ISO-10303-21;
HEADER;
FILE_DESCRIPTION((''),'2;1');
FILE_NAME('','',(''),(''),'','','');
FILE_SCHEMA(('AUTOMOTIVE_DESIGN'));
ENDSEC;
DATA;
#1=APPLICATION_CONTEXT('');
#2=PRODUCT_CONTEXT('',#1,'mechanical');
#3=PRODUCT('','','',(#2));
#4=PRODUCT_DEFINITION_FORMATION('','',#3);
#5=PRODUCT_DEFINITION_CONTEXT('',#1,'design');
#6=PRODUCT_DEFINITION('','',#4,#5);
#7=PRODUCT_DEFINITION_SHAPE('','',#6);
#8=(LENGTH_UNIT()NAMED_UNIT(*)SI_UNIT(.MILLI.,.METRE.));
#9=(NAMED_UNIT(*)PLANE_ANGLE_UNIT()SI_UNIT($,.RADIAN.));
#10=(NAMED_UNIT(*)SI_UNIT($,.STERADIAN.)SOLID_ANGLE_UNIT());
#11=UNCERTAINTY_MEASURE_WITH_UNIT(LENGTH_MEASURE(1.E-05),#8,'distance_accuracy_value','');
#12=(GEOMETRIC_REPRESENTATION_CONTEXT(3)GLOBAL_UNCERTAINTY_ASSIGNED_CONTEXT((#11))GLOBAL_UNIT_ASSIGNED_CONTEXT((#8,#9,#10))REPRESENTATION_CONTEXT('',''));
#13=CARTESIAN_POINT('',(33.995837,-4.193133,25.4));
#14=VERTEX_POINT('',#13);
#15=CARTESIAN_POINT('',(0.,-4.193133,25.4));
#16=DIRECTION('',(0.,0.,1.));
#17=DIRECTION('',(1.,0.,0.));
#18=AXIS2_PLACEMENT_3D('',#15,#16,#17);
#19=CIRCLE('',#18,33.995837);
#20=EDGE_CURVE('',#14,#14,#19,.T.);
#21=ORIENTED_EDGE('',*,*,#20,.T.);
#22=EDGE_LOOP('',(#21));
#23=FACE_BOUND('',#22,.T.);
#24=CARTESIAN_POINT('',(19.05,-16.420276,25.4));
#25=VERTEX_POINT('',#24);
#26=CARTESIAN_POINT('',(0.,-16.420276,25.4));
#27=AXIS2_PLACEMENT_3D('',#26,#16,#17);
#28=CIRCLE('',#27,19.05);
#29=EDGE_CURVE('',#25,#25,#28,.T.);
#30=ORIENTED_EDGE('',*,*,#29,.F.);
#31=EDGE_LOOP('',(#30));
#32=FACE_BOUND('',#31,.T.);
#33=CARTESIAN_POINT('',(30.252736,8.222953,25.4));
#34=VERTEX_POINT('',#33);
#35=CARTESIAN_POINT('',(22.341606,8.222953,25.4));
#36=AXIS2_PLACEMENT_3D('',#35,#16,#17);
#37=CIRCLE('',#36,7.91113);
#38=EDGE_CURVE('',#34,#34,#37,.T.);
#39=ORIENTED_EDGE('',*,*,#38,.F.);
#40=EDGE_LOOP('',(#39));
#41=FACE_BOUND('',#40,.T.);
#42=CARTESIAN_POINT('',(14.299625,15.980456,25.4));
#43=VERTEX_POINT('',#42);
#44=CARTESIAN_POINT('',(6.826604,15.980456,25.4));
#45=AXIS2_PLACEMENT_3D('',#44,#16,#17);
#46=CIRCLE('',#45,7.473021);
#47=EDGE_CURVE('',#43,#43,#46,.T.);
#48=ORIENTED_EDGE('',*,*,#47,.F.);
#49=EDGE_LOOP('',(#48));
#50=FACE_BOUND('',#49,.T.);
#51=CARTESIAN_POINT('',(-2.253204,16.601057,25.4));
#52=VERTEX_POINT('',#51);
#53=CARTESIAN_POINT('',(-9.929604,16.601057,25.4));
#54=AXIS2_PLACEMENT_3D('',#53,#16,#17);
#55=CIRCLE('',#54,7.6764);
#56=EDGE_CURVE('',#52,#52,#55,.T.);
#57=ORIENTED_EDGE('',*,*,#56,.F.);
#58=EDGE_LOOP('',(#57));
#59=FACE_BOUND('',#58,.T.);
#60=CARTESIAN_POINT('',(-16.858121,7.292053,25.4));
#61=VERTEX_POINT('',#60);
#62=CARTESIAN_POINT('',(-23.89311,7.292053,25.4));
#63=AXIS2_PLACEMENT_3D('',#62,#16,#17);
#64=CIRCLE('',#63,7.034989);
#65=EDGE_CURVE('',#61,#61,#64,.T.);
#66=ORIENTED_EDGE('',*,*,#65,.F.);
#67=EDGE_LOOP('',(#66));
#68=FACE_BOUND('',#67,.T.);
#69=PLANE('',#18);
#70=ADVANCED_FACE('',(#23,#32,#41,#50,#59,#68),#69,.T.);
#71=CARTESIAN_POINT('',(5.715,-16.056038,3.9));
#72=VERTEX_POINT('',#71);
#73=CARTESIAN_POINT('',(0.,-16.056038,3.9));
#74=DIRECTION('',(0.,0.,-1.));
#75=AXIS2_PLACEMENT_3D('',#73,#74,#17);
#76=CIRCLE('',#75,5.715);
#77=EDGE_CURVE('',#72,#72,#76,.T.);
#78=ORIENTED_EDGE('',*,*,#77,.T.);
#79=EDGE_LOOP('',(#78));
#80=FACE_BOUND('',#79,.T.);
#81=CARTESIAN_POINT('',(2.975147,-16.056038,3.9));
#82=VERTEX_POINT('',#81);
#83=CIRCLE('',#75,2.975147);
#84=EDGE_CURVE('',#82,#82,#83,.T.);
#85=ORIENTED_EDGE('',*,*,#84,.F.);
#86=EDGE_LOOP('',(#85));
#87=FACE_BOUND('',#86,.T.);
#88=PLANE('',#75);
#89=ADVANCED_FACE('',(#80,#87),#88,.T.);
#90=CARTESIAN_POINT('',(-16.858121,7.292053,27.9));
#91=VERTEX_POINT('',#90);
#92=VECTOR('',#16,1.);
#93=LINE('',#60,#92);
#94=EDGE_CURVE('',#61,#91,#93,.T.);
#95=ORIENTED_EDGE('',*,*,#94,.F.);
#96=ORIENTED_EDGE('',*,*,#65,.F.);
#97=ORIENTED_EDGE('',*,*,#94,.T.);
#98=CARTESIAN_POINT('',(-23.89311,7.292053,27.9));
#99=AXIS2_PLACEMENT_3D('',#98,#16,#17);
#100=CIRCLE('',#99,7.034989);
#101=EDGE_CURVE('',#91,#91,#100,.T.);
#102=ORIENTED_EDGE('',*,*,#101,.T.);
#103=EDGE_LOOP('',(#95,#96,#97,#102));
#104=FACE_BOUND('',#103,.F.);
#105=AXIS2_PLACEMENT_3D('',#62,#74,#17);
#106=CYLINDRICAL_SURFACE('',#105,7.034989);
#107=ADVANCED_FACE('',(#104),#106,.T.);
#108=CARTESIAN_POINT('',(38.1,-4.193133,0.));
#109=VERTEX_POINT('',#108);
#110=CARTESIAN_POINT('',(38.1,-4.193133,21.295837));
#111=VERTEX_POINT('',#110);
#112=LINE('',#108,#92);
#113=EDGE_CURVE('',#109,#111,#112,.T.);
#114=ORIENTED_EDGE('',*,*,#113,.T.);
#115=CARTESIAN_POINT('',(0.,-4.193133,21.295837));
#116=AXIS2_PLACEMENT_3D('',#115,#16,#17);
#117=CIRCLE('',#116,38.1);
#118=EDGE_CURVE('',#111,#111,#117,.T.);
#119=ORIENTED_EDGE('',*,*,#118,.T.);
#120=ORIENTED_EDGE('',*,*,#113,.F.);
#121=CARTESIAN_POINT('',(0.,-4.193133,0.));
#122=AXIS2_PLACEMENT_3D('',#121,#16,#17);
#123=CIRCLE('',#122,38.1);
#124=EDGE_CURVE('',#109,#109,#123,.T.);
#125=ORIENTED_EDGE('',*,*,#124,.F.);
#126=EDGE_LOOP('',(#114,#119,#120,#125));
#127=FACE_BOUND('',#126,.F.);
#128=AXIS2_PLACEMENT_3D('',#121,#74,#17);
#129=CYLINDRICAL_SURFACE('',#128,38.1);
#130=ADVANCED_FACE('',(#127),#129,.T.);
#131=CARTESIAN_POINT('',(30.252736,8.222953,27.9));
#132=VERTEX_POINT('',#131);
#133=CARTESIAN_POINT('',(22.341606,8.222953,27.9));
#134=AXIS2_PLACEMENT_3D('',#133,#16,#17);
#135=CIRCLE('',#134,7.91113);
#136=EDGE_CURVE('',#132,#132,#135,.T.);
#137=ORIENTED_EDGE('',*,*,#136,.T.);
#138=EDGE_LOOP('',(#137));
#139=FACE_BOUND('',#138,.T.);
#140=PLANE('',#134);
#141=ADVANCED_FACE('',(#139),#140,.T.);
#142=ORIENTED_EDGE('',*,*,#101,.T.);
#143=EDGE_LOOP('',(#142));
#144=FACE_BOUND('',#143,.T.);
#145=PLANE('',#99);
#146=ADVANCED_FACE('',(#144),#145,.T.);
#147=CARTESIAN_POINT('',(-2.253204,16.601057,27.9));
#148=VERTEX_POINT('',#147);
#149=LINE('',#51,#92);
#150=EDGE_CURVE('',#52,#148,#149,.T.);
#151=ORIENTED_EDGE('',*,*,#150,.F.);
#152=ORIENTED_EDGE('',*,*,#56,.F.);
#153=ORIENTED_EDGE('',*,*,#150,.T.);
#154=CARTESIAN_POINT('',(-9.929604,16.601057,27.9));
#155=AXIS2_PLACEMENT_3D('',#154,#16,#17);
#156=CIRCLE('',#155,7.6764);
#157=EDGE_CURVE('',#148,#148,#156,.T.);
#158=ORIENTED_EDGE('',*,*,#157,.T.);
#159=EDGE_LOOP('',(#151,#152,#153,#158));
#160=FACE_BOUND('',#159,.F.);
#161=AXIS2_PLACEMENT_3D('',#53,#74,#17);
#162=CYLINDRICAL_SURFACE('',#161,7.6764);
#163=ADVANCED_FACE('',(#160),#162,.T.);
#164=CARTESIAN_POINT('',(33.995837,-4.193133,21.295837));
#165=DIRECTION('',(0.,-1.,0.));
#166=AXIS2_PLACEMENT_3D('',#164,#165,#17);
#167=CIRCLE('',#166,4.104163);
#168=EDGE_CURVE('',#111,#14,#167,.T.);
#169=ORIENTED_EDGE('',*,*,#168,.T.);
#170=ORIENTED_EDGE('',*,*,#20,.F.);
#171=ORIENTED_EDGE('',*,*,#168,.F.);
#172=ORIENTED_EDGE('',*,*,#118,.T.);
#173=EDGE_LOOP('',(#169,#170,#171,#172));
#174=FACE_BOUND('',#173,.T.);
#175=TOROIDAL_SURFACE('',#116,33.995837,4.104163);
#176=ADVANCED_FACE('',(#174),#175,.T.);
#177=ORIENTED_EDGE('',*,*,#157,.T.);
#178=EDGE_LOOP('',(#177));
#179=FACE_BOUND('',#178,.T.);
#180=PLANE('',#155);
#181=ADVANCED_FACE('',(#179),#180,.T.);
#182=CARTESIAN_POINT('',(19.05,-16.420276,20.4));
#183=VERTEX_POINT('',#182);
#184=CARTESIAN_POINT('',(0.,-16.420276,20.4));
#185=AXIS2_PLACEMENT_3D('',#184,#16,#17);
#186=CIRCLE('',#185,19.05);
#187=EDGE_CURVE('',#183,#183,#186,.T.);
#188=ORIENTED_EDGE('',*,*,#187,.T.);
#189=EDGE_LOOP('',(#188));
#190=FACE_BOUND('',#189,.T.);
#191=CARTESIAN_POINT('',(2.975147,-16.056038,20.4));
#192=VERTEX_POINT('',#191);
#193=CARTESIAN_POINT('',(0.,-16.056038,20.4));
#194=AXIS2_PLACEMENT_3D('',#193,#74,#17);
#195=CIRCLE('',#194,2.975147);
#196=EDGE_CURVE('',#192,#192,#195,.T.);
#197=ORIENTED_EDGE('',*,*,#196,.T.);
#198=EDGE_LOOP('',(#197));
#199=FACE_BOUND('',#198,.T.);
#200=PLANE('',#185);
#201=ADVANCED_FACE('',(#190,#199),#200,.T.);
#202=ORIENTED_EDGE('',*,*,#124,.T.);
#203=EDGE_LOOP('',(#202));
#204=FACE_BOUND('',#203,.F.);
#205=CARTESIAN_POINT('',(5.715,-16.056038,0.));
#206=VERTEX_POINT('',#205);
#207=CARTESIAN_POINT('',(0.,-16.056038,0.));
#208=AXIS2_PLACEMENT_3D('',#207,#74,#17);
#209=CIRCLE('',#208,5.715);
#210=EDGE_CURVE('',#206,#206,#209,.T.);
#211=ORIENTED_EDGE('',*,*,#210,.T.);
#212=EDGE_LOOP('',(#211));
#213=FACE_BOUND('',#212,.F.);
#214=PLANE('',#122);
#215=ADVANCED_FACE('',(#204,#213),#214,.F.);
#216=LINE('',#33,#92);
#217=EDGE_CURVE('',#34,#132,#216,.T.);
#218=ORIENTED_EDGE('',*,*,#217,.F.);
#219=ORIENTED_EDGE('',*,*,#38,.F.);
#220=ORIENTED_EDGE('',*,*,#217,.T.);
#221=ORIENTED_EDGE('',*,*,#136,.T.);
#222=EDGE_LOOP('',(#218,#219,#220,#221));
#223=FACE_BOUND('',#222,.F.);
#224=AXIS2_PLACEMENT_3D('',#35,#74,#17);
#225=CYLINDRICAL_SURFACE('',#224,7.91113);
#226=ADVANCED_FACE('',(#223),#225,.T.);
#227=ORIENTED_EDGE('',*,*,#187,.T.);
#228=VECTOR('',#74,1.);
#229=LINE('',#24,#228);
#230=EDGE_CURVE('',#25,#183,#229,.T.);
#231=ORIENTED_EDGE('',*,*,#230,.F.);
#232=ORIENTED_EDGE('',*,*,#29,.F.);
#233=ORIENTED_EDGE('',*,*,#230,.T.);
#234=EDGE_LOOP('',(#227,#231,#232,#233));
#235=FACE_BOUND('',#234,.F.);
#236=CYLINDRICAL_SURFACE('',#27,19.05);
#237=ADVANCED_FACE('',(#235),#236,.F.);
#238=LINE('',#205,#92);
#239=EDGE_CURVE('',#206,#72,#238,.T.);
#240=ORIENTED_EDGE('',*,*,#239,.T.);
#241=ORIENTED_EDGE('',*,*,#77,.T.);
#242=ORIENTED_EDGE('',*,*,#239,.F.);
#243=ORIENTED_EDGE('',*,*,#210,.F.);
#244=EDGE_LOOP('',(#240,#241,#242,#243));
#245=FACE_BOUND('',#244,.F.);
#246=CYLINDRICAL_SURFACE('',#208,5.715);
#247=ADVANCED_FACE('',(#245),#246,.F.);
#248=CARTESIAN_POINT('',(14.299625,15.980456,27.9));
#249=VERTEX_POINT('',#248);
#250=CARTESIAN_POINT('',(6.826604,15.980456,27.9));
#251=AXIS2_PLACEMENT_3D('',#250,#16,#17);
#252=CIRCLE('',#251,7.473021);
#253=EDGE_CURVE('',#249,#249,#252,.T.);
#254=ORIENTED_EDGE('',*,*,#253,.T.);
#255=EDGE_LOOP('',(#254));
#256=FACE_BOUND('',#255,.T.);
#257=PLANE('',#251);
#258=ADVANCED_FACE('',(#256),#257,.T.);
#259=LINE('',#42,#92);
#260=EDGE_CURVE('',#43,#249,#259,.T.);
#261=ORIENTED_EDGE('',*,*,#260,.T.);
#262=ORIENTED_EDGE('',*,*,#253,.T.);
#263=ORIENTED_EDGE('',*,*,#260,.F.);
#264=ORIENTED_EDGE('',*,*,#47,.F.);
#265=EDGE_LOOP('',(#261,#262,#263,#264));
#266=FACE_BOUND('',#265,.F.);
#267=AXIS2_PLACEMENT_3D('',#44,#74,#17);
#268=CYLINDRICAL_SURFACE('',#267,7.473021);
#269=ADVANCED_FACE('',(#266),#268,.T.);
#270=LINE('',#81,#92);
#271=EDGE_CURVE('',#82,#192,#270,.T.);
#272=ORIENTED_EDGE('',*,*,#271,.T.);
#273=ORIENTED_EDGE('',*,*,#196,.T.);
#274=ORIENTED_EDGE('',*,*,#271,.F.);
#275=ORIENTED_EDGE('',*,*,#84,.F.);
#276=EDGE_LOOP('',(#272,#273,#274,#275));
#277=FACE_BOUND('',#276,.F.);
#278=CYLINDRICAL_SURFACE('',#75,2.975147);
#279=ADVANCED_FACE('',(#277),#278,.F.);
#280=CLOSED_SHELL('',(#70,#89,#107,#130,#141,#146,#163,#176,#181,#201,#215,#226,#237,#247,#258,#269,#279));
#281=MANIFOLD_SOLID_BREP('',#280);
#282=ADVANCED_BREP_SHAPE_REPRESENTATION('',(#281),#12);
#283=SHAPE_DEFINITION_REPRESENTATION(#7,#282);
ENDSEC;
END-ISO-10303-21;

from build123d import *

# Parameters (mm, degrees)
F0_R      = 38.1
F2_DEPTH  = 25.4
F3_R      = 4.104163056
F4_R      = 7.676399804
F4_R_2    = 7.4730209118
F4_R_3    = 7.9111301116
F4_R_4    = 7.0349890874
F6_DEPTH  = 2.5
F7_R      = 19.05
F8_DEPTH  = 5
F9_R      = 5.715
F10_DEPTH = 3.9
F11_R     = 2.9751470693
F12_DEPTH = 24.001


# Not quite as in the source:
# - a feature names something its author has since deleted; it is built from what else it names


with BuildPart() as f2:
    # F0 (on Top) → F2 (new body)
    with BuildSketch(Plane.XY):
        with Locations((0, -4.1931332196)):
            Circle(F0_R)
    extrude(amount=F2_DEPTH)

    # F3
    f3_edges = [f2.edges().sort_by_distance(p)[0] for p in [
        (-38.1, -4.193133, 25.4),
    ]]
    fillet(f3_edges, radius=F3_R)

    # F4 (on face) → F6 (join)
    with BuildSketch(Plane.XY.offset(25.4)):
        with Locations((-9.9296038883, 16.6010573738)):
            Circle(F4_R)
        with Locations((6.8266042386, 15.9804562879)):
            Circle(F4_R_2)
        with Locations((22.3416063405, 8.2229533103)):
            Circle(F4_R_3)
        with Locations((-23.8931100186, 7.2920526448)):
            Circle(F4_R_4)
    extrude(amount=F6_DEPTH)

    # F7 (on face) → F8 (cut)
    with BuildSketch(Plane.XY.offset(25.4)):
        with Locations((0, -16.4202762372)):
            Circle(F7_R)
    extrude(amount=-F8_DEPTH, mode=Mode.SUBTRACT)

    # F9 (on face) → F10 (cut)
    with BuildSketch(Plane(origin=(0, 0, 0), x_dir=(1, 0, 0), z_dir=(0, 0, -1))):
        with Locations((0, 16.0560380752)):
            Circle(F9_R)
    extrude(amount=-F10_DEPTH, mode=Mode.SUBTRACT)

    # F11 (on face) → F12 (cut, through all)
    with BuildSketch(Plane(origin=(0, 0, 3.9), x_dir=(1, 0, 0), z_dir=(0, 0, -1))):
        with Locations((0, 16.0560380752)):
            Circle(F11_R)
    extrude(amount=-F12_DEPTH, mode=Mode.SUBTRACT)


solid = f2.part
